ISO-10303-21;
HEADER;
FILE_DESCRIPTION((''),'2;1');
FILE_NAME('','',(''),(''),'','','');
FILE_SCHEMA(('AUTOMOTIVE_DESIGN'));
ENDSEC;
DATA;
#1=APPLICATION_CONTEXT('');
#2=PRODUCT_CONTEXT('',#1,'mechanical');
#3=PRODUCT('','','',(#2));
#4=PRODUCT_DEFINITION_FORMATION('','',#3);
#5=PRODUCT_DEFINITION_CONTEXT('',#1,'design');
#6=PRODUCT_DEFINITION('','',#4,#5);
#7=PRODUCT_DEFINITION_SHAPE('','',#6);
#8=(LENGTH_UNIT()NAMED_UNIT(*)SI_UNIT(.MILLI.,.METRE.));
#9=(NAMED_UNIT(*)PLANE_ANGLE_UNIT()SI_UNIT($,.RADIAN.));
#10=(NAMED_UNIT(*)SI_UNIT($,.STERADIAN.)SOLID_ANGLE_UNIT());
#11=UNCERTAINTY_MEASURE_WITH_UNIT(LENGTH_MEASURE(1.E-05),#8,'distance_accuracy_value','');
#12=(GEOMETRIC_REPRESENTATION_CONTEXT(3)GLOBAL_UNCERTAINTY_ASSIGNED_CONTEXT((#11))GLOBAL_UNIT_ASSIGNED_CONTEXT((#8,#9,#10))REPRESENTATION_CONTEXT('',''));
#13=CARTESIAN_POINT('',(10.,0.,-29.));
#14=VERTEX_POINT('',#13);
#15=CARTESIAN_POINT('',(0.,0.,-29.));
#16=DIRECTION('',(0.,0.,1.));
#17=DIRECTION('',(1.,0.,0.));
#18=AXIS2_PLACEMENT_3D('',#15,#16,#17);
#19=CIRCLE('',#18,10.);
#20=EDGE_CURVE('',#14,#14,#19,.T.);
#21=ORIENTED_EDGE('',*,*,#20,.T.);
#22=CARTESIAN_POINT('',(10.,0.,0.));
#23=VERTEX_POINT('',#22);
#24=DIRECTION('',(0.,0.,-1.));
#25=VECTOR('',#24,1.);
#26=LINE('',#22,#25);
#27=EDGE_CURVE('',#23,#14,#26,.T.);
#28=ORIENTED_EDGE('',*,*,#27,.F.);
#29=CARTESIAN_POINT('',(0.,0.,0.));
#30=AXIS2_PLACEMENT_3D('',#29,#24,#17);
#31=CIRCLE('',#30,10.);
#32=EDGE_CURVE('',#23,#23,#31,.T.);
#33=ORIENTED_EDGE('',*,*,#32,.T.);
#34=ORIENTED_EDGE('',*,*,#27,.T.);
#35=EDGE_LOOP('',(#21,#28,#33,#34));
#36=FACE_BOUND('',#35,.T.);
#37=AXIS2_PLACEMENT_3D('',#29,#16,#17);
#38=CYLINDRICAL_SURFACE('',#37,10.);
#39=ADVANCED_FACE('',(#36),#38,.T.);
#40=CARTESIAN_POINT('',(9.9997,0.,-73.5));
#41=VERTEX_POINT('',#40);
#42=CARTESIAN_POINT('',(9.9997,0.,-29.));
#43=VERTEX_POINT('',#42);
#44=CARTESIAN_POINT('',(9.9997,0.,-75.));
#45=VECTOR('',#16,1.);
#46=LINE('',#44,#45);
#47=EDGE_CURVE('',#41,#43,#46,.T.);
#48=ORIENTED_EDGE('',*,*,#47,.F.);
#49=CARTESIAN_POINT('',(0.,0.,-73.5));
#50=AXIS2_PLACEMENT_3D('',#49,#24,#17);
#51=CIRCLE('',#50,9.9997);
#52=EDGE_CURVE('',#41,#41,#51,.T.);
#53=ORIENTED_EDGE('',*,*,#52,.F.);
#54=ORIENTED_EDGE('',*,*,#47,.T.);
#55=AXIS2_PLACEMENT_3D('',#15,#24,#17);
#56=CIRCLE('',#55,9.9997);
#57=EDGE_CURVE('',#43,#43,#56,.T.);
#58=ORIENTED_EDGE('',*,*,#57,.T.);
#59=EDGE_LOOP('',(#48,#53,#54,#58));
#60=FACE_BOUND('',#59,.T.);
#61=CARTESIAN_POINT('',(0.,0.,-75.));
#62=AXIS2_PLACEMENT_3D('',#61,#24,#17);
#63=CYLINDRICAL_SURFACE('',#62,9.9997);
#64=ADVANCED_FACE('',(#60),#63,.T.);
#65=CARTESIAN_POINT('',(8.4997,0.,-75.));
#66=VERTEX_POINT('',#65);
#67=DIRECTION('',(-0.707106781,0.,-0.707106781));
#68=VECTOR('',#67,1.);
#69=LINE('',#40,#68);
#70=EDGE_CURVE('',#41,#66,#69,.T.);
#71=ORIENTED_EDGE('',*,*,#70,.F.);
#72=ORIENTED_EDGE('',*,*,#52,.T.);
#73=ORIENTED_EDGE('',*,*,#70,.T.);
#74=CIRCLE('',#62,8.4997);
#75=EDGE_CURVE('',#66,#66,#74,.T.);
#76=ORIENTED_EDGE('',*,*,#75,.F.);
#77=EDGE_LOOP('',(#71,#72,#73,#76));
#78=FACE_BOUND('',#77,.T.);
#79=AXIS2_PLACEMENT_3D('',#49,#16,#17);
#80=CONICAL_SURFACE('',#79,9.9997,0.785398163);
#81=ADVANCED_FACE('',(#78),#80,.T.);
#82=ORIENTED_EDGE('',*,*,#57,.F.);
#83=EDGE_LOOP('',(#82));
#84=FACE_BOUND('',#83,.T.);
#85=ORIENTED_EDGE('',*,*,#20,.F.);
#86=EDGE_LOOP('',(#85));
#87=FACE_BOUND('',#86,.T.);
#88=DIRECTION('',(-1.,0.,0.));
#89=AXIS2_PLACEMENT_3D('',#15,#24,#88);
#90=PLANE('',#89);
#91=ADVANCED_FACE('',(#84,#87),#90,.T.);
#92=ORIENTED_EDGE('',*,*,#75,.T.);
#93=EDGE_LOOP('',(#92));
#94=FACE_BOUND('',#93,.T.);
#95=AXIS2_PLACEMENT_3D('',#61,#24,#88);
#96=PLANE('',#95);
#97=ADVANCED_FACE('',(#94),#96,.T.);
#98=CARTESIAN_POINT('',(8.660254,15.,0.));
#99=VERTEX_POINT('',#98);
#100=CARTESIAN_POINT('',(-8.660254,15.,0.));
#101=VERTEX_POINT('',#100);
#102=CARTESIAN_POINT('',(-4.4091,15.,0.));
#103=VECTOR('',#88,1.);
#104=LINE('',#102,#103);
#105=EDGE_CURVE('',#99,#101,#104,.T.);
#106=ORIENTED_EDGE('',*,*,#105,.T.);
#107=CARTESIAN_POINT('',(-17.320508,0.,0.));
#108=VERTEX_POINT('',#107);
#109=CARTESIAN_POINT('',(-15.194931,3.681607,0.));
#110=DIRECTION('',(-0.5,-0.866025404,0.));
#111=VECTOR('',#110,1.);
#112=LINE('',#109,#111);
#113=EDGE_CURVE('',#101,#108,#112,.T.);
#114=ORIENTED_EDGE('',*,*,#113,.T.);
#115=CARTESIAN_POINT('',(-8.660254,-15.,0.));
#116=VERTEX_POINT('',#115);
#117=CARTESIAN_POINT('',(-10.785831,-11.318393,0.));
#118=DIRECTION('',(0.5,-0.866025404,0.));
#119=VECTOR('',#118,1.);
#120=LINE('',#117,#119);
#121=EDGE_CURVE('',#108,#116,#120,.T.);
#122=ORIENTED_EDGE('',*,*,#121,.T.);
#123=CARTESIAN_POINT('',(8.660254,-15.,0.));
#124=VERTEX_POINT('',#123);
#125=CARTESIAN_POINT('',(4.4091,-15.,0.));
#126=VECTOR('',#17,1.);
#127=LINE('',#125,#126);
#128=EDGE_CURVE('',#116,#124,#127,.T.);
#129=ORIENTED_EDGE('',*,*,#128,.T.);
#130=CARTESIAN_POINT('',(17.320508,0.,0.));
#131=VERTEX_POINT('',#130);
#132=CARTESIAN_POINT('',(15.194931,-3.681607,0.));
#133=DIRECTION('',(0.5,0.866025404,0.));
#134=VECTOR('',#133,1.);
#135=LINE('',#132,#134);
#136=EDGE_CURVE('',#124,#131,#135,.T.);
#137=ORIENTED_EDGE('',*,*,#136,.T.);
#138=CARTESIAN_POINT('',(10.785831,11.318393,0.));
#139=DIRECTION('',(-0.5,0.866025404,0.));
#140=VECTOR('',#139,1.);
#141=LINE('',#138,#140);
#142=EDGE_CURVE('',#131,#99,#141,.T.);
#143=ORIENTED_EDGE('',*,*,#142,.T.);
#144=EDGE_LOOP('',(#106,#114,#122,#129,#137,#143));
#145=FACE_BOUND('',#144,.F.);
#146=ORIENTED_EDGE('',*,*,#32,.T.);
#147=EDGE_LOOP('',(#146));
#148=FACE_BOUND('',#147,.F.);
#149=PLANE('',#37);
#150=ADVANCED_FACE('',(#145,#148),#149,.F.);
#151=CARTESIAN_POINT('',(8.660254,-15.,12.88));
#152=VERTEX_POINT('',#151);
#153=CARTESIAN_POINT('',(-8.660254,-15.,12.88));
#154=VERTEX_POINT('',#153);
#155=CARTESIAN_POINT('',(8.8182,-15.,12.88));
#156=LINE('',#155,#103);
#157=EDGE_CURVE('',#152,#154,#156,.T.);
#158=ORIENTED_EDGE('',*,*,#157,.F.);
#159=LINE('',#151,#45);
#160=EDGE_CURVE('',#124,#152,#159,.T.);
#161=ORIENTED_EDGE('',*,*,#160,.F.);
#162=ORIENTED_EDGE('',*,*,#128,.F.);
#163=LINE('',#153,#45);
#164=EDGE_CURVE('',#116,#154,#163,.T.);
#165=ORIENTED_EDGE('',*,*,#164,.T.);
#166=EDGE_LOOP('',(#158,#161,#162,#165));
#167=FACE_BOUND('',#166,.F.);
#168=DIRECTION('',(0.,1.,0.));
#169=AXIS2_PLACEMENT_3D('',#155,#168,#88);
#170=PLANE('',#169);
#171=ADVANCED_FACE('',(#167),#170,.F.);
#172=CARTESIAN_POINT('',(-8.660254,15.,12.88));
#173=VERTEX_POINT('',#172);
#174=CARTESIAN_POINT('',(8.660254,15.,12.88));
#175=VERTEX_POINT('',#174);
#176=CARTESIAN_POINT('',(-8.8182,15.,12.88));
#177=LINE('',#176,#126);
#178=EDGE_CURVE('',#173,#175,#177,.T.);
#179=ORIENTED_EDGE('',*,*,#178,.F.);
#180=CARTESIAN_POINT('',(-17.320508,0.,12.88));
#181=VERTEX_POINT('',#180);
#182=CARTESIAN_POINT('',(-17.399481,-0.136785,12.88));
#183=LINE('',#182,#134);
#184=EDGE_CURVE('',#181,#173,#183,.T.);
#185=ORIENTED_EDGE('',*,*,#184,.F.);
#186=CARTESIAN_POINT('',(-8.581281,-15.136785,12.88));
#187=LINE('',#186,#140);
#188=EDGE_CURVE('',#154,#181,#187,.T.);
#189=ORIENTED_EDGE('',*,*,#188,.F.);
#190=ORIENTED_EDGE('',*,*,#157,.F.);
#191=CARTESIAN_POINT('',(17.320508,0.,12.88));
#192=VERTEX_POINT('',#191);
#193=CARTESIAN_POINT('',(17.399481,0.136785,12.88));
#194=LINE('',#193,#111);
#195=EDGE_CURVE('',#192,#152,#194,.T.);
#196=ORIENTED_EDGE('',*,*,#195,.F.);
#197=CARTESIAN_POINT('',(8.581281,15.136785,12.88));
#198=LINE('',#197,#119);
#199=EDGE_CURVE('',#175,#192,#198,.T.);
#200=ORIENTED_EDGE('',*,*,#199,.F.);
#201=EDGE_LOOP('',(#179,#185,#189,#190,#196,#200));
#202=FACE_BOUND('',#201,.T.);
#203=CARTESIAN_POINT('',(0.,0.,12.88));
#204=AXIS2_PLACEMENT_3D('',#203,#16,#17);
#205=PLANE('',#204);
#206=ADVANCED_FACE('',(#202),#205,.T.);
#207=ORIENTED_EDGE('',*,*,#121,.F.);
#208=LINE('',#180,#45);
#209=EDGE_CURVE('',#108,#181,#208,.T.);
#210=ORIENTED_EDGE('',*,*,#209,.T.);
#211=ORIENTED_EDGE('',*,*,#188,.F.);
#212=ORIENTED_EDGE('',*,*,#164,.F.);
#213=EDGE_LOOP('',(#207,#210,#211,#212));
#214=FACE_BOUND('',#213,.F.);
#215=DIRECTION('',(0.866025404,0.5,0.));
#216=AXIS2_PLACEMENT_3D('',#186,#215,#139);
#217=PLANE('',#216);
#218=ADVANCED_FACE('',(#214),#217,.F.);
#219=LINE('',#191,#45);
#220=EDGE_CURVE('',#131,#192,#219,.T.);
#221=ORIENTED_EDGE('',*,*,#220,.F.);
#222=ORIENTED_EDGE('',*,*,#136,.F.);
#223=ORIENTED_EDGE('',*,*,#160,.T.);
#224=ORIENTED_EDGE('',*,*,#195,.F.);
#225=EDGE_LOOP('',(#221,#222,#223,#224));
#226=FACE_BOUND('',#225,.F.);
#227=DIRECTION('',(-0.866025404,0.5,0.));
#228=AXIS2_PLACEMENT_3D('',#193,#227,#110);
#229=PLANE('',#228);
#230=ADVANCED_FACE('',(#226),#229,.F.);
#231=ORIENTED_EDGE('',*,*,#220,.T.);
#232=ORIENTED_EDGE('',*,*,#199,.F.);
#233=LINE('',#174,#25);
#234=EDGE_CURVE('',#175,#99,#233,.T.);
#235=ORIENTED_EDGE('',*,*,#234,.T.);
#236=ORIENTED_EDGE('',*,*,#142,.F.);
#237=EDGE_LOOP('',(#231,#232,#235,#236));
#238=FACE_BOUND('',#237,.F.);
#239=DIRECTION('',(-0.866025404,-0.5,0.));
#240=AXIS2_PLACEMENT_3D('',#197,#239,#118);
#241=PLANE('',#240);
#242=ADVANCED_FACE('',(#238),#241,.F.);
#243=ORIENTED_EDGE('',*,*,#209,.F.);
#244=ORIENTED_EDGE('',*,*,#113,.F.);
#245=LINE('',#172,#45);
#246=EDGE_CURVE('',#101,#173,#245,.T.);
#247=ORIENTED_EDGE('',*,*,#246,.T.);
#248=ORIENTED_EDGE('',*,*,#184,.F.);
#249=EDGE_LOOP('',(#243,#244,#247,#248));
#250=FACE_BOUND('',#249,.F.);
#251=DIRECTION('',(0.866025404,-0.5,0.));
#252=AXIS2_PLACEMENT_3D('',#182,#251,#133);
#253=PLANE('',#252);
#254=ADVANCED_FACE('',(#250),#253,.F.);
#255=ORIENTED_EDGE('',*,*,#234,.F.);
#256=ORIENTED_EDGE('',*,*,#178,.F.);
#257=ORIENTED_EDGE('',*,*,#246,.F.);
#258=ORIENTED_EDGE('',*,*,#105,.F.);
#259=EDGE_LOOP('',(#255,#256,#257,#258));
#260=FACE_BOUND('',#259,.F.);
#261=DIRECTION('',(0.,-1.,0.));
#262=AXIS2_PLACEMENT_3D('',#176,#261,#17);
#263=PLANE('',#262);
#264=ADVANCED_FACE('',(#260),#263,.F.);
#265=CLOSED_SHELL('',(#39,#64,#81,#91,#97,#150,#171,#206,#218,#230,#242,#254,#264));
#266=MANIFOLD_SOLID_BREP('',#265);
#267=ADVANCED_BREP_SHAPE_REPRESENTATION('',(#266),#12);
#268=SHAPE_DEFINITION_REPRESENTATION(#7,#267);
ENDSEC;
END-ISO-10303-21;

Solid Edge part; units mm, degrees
sketch "Sketch1" plane through (0, 0, 0) normal (0, 0, 1) x (1, 0, 0)
  circle A0 centre (0, 0) radius 17.4
  dimension "D1" = 34.8
extrude "Protrusion1" add sketch "Sketch1" along normal blind 12.88
sketch "Sketch2" plane through (0, 0, 0) normal (0, 0, -1) x (1, 0, 0)
  circle A0 centre (0, 0) radius 10
extrude "Protrusion2" add sketch "Sketch2" along normal blind 75
sketch "Sketch3" plane through (0, 0, -75) normal (0, 0, -1) x (1, 0, 0)
  circle A0 centre (0, 0) radius 9.9997
extrude "Cutout1" cut sketch "Sketch3" against normal blind 46 flip side to cut
chamfer "Chamfer_1" distance 1.5 angle 45 1 edges at (-9.9997, 0, -75)
sketch "Sketch4" plane through (0, 0, 12.88) normal (0, 0, 1) x (1, 0, 0)
  line L0 (-8.8182, 15) -> (8.8182, 15)
  dimension "D1" = 30
extrude "Cutout2" cut sketch "Sketch4" against normal up to next material side at (0, 15.05, 12.88)
pattern_circular "Pattern1" count 6 over 360 about axis through (0, 0, 12.88) along (0, 0, 1) of "Cutout2"
properties part number "24104521"
